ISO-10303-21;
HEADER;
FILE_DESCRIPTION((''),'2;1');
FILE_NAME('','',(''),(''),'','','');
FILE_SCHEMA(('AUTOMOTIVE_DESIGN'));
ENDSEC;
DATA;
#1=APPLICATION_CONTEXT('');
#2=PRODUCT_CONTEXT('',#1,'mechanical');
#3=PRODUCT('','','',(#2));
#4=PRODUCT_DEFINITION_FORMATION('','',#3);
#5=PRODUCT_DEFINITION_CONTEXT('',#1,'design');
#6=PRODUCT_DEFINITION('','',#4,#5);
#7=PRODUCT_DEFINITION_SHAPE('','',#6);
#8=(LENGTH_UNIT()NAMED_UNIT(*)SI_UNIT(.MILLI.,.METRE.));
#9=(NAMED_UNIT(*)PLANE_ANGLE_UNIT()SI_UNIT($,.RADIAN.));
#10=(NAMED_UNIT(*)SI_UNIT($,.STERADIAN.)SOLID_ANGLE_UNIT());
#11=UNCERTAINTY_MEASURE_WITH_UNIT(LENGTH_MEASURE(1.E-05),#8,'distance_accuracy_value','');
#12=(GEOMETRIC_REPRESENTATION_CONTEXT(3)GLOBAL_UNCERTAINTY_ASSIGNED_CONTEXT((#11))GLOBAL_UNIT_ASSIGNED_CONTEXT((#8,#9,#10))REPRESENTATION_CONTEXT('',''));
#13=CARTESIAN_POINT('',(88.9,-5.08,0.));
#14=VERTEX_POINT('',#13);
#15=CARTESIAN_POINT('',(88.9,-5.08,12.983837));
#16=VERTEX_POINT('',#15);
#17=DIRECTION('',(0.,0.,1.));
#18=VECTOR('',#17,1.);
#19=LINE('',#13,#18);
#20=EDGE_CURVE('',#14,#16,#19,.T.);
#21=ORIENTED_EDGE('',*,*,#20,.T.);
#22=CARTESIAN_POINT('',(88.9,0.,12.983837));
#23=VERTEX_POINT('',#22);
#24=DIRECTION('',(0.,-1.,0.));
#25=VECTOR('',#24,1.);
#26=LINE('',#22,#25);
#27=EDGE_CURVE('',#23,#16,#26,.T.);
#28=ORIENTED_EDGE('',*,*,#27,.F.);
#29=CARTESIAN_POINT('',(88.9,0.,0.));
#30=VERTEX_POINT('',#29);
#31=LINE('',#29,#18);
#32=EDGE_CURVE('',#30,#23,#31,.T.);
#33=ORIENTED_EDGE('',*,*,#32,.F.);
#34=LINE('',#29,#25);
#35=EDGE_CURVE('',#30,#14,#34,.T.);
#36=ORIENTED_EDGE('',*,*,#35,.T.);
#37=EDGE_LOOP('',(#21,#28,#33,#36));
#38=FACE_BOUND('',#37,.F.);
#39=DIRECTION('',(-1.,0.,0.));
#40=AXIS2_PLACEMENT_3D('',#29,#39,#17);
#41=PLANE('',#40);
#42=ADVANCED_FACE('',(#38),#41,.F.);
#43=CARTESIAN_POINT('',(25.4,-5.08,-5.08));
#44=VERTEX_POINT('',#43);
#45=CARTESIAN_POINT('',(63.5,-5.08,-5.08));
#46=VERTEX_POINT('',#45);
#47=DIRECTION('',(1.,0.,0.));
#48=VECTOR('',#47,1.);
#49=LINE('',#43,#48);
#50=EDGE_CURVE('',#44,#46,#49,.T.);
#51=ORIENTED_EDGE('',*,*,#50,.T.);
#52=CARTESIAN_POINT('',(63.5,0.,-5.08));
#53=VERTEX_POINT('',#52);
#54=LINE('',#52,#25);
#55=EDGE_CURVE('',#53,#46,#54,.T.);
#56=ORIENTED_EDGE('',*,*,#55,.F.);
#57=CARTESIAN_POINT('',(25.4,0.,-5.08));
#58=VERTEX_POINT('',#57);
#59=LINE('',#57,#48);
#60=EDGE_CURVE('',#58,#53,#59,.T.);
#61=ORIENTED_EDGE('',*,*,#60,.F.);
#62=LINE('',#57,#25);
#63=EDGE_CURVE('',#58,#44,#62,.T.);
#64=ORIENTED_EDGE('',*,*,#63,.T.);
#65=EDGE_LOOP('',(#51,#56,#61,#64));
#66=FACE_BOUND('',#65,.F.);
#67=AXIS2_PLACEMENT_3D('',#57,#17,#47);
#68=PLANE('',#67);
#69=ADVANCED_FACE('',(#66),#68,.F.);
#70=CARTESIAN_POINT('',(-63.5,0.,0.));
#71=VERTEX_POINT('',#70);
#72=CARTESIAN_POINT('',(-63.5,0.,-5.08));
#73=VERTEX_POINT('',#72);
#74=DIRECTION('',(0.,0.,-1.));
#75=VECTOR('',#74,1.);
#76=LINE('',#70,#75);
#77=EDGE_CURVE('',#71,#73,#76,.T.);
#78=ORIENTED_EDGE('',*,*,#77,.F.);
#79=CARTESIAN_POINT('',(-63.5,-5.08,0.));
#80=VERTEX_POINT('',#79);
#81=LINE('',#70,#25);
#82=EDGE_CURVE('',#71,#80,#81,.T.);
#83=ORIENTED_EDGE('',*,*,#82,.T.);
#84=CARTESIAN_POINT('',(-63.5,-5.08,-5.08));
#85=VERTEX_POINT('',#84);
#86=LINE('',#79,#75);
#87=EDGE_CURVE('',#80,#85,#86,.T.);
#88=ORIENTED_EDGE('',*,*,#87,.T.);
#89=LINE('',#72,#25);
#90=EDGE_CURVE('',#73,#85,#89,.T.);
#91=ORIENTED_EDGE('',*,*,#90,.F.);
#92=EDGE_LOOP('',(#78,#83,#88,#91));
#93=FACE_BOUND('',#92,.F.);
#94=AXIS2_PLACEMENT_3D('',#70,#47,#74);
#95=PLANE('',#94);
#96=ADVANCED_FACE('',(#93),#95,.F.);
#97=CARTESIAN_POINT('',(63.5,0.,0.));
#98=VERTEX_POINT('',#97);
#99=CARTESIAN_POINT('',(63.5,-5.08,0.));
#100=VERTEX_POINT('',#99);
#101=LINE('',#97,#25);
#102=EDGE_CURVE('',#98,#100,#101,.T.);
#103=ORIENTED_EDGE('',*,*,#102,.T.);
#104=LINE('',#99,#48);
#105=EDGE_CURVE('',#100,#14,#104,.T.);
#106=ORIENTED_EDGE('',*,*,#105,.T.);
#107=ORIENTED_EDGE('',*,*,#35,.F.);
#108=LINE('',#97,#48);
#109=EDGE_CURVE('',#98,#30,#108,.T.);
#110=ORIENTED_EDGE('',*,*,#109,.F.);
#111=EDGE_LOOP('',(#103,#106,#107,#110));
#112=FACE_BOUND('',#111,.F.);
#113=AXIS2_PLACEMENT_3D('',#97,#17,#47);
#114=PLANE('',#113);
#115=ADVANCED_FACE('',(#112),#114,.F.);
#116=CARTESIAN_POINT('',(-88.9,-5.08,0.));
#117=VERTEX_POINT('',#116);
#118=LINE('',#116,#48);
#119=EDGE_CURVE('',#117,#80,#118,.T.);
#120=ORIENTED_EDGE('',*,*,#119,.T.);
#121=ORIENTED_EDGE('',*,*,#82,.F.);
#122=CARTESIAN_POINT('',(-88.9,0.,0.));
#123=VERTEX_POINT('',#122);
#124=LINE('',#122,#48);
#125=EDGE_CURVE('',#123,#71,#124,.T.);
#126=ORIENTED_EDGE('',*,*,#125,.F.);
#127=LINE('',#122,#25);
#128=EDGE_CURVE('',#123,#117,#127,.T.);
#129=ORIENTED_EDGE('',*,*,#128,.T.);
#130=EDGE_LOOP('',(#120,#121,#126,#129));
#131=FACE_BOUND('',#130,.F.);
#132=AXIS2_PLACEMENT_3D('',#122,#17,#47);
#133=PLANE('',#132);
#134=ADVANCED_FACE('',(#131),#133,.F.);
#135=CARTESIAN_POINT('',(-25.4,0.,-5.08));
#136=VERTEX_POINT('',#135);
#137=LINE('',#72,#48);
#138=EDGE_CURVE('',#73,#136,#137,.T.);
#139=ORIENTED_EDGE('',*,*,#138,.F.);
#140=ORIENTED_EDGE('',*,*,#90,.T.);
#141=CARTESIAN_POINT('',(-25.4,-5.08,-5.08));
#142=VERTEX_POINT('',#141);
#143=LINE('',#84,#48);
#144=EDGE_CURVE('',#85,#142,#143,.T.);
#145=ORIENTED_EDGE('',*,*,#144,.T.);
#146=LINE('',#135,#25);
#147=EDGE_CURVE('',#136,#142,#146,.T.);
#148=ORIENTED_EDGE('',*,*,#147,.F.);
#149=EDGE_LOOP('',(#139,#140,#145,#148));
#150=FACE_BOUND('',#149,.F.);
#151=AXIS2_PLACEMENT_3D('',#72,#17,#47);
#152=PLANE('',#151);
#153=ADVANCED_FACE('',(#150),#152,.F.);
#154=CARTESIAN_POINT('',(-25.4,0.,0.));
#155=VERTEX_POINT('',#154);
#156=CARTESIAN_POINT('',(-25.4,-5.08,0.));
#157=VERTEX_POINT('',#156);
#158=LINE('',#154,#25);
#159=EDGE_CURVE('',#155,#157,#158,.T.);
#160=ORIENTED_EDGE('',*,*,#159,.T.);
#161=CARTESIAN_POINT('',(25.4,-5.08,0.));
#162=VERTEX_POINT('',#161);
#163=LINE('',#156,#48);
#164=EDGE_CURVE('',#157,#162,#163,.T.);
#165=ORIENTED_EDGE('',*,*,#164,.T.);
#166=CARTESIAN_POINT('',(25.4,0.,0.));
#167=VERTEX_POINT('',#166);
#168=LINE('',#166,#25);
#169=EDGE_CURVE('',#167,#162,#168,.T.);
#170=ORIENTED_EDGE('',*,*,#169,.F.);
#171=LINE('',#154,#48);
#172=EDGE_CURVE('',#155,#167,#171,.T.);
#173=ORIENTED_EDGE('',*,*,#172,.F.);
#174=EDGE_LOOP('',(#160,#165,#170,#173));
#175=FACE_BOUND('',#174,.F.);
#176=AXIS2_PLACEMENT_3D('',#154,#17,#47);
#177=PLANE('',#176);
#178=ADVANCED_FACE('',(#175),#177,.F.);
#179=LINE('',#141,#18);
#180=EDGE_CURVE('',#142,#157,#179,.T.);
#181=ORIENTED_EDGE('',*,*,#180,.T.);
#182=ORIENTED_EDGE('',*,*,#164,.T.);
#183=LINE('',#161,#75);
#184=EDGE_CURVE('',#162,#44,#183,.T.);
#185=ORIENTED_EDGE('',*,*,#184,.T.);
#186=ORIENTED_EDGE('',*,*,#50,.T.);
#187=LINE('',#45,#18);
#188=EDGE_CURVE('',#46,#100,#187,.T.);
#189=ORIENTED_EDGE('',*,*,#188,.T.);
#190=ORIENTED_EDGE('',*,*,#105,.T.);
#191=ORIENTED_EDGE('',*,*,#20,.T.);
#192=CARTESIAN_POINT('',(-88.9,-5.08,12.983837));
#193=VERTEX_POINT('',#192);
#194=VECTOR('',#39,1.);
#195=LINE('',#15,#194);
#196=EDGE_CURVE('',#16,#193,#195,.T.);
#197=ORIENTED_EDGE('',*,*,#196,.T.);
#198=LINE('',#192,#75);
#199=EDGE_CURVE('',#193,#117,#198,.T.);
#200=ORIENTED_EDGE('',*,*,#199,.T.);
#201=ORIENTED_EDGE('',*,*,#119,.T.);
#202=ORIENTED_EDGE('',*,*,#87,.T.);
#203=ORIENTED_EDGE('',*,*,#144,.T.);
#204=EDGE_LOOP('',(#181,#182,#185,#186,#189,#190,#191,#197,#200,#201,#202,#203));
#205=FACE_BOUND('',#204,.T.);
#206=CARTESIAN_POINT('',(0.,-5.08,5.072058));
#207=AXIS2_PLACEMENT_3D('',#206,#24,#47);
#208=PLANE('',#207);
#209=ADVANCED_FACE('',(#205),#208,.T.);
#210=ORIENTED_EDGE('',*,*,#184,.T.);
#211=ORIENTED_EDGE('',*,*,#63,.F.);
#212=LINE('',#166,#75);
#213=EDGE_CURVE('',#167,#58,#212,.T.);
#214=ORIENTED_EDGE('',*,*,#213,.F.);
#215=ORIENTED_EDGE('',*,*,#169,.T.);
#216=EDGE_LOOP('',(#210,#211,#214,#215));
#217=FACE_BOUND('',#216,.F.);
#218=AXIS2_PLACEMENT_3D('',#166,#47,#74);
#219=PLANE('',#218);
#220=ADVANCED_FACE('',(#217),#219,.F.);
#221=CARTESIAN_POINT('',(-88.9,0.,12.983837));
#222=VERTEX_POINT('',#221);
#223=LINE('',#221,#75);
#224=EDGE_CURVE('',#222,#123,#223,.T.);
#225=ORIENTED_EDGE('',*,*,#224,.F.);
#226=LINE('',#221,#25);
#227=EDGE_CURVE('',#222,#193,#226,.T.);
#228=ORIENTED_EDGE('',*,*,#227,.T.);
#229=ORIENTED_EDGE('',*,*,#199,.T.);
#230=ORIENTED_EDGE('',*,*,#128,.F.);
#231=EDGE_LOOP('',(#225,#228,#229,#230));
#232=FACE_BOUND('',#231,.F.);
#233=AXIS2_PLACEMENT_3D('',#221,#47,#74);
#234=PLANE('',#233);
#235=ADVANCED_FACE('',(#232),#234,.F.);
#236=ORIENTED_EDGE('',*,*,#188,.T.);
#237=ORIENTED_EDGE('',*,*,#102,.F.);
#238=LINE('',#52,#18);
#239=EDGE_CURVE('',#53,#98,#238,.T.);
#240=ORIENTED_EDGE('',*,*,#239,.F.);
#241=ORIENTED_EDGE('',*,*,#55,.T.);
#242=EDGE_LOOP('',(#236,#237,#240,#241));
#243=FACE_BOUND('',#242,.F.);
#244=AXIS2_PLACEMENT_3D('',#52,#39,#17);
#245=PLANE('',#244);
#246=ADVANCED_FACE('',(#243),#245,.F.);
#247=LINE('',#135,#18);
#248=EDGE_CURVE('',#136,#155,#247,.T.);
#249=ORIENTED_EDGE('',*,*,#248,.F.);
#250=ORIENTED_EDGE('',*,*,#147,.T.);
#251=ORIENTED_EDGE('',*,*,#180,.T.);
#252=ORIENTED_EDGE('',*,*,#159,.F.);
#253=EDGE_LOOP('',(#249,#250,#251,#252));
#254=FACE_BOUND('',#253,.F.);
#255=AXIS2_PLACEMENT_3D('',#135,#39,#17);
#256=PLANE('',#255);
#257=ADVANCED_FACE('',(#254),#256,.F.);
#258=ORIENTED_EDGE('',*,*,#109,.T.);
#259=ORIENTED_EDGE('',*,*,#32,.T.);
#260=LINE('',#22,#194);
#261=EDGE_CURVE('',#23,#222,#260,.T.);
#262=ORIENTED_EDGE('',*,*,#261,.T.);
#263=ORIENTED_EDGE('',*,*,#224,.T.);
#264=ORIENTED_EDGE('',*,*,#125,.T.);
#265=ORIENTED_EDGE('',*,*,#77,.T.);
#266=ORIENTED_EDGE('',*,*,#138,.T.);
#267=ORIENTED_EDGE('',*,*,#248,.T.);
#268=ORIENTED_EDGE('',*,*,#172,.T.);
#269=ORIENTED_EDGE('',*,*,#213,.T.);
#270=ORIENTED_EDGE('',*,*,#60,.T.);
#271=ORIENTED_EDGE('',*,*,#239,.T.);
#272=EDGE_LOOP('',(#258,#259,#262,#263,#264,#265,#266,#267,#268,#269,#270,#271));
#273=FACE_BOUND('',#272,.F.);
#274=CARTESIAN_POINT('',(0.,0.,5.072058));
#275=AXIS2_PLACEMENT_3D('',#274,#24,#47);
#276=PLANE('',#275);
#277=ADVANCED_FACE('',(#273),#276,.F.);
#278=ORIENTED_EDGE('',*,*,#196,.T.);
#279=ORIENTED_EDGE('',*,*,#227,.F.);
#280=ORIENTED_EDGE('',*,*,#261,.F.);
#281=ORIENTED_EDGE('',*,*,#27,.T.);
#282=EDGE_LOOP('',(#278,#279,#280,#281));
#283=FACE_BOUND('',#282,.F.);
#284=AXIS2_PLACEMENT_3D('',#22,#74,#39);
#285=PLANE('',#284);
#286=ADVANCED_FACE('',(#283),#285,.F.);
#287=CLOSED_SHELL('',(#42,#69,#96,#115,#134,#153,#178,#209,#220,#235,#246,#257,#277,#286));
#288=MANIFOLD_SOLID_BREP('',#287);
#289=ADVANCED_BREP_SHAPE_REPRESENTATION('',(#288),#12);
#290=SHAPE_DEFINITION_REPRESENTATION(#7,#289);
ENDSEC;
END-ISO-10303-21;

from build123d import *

# Parameters (mm, degrees)
F1_DEPTH = 5.08


# Not quite as in the source:
# - a feature names something its author has since deleted; it is built from what else it names


with BuildPart() as f1:
    # F0 (on Front) → F1 (new body)
    with BuildSketch(Plane.XZ):
        Polygon((-25.4, 0), (0, 0), (25.4, 0), (25.4, -5.08), (63.5, -5.08), (63.5, 0), (88.9, 0), (88.9, 3.1722693238), (88.9, 6.3445386477), (88.9, 12.9838371649), (-88.9, 12.9838371649), (-88.9, 6.3445386477), (-88.9, 3.1722693238), (-88.9, 0), (-63.5, 0), (-63.5, -5.08), (-25.4, -5.08), align=None)
    extrude(amount=F1_DEPTH)


solid = f1.part
